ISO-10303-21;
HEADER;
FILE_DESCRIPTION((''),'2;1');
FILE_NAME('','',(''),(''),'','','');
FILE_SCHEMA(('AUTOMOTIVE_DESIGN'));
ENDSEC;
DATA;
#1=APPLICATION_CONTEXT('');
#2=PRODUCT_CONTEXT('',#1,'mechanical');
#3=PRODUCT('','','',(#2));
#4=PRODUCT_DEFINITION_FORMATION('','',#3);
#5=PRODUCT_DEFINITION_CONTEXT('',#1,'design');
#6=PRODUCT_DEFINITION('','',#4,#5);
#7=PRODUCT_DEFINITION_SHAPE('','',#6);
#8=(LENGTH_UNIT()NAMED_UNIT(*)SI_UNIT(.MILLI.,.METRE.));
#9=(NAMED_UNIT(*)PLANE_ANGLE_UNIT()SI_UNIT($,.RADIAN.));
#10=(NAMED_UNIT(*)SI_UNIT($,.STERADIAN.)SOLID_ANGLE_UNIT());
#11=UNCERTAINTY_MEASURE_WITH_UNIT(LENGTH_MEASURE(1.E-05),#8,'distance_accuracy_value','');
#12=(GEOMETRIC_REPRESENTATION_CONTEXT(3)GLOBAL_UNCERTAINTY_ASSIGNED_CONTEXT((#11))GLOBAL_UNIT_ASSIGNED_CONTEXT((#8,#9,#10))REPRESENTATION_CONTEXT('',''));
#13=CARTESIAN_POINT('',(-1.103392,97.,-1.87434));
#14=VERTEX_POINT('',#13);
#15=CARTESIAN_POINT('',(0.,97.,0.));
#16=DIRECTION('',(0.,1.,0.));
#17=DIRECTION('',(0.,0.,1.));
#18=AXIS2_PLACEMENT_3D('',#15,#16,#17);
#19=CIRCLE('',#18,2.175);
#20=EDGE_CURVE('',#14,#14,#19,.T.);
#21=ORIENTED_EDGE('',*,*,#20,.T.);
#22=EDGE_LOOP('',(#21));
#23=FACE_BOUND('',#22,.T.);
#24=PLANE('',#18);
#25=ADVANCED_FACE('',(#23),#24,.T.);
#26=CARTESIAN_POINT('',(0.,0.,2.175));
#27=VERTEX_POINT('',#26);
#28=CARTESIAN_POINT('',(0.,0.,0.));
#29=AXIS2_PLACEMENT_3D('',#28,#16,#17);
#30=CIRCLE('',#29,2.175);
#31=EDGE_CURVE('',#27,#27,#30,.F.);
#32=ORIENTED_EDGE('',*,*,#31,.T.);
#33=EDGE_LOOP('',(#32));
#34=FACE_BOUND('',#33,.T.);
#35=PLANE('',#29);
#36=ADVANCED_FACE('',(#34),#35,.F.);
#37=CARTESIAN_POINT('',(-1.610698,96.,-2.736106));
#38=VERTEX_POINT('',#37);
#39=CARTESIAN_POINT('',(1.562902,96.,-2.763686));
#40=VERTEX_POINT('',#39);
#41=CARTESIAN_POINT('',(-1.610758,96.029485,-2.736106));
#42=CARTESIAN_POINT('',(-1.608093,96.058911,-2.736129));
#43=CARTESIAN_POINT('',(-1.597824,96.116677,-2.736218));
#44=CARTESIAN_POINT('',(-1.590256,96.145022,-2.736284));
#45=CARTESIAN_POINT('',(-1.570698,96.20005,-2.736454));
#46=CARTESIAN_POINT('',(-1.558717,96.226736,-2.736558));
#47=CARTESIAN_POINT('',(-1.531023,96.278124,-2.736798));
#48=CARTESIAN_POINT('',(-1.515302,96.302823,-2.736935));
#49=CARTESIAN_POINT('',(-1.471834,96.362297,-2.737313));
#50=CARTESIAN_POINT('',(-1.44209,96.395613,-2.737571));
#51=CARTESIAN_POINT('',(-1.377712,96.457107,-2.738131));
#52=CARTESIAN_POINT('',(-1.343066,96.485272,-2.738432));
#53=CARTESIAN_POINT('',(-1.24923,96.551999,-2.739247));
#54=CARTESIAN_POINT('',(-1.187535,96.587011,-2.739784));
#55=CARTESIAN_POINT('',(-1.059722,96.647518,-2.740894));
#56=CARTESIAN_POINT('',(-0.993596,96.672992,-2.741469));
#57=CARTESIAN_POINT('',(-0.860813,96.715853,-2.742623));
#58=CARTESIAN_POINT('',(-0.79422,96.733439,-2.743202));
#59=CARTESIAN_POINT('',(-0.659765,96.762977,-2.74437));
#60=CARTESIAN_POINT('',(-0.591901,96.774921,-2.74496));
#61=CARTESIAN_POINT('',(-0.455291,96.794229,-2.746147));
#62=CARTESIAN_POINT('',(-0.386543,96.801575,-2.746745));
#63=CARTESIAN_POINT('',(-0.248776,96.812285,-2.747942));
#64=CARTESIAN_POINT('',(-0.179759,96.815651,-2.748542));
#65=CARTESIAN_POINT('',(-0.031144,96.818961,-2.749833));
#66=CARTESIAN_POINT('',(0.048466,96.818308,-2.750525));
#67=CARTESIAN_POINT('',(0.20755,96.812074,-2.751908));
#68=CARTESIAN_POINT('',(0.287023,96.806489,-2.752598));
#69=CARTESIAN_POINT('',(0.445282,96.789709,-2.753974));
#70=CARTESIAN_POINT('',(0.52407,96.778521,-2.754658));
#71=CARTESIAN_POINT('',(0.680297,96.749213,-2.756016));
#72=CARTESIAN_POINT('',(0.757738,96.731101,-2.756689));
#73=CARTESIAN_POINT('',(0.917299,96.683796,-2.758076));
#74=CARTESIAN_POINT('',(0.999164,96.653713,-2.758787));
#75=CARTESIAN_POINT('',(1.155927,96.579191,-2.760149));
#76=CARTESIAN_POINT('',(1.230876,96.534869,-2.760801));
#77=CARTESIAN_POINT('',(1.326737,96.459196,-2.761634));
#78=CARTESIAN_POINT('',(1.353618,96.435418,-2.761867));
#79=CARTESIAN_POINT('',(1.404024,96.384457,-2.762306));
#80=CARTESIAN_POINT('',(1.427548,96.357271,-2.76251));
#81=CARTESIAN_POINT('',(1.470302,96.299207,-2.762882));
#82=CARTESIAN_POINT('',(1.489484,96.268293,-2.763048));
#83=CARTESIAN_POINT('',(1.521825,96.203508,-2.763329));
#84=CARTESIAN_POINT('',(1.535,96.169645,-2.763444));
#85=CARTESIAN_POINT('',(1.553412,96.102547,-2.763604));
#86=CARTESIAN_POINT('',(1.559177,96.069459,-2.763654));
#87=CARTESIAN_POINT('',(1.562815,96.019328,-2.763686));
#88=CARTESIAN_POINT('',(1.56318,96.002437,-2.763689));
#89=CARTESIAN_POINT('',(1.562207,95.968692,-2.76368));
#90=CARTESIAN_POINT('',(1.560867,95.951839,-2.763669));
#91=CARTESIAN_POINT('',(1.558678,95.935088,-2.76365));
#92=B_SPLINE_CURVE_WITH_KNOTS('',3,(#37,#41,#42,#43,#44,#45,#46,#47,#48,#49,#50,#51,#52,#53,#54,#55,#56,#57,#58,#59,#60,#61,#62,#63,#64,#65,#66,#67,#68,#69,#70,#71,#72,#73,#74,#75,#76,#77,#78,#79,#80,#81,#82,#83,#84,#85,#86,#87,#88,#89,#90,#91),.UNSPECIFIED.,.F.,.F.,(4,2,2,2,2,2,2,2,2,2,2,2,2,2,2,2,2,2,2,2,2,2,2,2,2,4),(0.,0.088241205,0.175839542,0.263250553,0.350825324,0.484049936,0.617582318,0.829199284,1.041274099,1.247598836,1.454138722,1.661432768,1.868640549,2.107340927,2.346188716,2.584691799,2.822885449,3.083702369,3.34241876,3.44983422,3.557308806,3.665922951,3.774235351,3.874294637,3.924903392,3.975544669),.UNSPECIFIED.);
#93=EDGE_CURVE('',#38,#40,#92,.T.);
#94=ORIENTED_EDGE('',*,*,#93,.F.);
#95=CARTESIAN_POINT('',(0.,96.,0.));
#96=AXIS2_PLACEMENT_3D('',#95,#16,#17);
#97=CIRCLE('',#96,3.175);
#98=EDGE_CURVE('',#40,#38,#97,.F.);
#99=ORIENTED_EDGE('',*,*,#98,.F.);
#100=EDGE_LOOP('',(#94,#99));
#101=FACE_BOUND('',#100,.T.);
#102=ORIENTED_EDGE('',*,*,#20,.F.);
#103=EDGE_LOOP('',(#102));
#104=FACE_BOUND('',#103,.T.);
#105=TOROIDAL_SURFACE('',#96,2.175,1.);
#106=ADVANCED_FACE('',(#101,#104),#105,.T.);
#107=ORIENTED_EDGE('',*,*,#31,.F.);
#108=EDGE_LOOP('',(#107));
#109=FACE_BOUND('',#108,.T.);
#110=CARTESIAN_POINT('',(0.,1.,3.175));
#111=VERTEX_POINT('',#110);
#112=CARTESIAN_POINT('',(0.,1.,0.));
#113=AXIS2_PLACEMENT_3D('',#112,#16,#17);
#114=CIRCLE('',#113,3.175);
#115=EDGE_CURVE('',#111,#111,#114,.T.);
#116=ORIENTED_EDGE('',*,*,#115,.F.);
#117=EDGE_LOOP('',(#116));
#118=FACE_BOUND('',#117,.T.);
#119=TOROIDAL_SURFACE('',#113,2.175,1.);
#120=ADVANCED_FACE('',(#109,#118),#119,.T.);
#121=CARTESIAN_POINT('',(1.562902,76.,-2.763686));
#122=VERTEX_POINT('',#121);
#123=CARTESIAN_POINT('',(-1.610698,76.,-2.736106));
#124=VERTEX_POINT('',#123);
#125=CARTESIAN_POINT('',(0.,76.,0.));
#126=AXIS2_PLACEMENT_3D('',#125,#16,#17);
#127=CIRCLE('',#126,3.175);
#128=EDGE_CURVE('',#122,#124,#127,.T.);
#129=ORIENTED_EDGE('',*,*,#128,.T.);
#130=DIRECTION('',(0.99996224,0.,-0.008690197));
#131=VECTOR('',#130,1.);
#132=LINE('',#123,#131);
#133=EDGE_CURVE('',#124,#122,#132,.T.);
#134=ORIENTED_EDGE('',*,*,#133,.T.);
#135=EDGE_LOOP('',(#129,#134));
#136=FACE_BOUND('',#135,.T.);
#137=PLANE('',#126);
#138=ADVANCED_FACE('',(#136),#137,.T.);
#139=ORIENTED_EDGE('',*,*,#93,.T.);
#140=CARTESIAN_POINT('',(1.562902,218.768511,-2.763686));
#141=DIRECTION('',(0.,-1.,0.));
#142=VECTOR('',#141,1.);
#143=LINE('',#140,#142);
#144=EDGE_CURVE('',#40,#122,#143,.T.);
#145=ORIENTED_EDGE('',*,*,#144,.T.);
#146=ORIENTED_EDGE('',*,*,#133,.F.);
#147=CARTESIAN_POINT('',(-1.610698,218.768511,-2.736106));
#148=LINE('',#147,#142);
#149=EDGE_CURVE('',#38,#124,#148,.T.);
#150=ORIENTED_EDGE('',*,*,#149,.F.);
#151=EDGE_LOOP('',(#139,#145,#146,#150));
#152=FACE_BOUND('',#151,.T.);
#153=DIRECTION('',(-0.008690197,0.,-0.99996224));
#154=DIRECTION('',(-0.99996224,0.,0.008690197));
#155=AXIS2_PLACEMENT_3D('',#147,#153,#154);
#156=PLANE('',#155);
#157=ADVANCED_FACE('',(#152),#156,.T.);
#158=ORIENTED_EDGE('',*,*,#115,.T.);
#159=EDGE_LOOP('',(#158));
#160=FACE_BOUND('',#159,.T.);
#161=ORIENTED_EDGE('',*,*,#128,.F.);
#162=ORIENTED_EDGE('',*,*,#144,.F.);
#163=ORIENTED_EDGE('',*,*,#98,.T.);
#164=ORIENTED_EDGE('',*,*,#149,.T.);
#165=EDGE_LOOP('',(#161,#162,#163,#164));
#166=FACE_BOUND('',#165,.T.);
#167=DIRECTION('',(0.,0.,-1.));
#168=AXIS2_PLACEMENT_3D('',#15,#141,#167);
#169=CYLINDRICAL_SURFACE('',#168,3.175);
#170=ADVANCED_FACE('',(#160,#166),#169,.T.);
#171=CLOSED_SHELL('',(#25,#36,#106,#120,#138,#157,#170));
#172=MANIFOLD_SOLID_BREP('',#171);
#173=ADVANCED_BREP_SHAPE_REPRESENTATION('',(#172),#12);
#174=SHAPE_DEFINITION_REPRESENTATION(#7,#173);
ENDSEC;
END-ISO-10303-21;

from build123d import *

# Parameters (mm, degrees)
SKETCH1_R               = 3.175
BOSS_EXTRUDE1_DEPTH     = 97
CUT_EXTRUDE1_DEPTH      = 98.103868358
CUT_EXTRUDE1_DEPTH_BACK = 21


with BuildPart() as part:
    # Sketch1 → Boss-Extrude1 (new body)
    with BuildSketch(Plane(origin=(0, 0, 0), x_dir=(1, 0, 0), z_dir=(0, 1, 0))):
        with Locations(Location((0, 0, 0), (0, 0, 90))):
            Circle(SKETCH1_R)
    extrude(amount=BOSS_EXTRUDE1_DEPTH)

    # Sketch2 → Cut-Extrude1 (cut, two sides: drawn at the far end of the back side and taken through both)
    with BuildSketch(Plane(origin=(0, 97, 0), x_dir=(1, 0, 0), z_dir=(0, 1, 0)).offset(-CUT_EXTRUDE1_DEPTH_BACK)):
        Polygon((-26.82080565, 2.517016971), (-1.610698227, 2.736106032), (1.562902146, 2.763686285), (26.773009569, 2.982775346), (26.334831446, 53.402990191), (-27.258983772, 52.937231816), align=None)
    extrude(amount=CUT_EXTRUDE1_DEPTH + CUT_EXTRUDE1_DEPTH_BACK, mode=Mode.SUBTRACT)

    # Fillet1: read off the stored shape, not the designer's step
    # Fillet1 outline → Fillet1 (revolve, cut)
    with BuildSketch(Plane.XY):
        with BuildLine():
            ThreePointArc((3.175, 1), (2.882106781, 0.292893219), (2.175, 0))
            Line((2.175, 0), (3.175, 0))
            Line((3.175, 0), (3.175, 1))
        make_face()
        with BuildLine():
            ThreePointArc((2.175, 97), (2.882106781, 96.707106781), (3.175, 96))
            Line((3.175, 96), (3.175, 97))
            Line((3.175, 97), (2.175, 97))
        make_face()
    revolve(axis=Axis((0, 0, 0), (0, 1, 0)), mode=Mode.SUBTRACT)


solid = part.part
